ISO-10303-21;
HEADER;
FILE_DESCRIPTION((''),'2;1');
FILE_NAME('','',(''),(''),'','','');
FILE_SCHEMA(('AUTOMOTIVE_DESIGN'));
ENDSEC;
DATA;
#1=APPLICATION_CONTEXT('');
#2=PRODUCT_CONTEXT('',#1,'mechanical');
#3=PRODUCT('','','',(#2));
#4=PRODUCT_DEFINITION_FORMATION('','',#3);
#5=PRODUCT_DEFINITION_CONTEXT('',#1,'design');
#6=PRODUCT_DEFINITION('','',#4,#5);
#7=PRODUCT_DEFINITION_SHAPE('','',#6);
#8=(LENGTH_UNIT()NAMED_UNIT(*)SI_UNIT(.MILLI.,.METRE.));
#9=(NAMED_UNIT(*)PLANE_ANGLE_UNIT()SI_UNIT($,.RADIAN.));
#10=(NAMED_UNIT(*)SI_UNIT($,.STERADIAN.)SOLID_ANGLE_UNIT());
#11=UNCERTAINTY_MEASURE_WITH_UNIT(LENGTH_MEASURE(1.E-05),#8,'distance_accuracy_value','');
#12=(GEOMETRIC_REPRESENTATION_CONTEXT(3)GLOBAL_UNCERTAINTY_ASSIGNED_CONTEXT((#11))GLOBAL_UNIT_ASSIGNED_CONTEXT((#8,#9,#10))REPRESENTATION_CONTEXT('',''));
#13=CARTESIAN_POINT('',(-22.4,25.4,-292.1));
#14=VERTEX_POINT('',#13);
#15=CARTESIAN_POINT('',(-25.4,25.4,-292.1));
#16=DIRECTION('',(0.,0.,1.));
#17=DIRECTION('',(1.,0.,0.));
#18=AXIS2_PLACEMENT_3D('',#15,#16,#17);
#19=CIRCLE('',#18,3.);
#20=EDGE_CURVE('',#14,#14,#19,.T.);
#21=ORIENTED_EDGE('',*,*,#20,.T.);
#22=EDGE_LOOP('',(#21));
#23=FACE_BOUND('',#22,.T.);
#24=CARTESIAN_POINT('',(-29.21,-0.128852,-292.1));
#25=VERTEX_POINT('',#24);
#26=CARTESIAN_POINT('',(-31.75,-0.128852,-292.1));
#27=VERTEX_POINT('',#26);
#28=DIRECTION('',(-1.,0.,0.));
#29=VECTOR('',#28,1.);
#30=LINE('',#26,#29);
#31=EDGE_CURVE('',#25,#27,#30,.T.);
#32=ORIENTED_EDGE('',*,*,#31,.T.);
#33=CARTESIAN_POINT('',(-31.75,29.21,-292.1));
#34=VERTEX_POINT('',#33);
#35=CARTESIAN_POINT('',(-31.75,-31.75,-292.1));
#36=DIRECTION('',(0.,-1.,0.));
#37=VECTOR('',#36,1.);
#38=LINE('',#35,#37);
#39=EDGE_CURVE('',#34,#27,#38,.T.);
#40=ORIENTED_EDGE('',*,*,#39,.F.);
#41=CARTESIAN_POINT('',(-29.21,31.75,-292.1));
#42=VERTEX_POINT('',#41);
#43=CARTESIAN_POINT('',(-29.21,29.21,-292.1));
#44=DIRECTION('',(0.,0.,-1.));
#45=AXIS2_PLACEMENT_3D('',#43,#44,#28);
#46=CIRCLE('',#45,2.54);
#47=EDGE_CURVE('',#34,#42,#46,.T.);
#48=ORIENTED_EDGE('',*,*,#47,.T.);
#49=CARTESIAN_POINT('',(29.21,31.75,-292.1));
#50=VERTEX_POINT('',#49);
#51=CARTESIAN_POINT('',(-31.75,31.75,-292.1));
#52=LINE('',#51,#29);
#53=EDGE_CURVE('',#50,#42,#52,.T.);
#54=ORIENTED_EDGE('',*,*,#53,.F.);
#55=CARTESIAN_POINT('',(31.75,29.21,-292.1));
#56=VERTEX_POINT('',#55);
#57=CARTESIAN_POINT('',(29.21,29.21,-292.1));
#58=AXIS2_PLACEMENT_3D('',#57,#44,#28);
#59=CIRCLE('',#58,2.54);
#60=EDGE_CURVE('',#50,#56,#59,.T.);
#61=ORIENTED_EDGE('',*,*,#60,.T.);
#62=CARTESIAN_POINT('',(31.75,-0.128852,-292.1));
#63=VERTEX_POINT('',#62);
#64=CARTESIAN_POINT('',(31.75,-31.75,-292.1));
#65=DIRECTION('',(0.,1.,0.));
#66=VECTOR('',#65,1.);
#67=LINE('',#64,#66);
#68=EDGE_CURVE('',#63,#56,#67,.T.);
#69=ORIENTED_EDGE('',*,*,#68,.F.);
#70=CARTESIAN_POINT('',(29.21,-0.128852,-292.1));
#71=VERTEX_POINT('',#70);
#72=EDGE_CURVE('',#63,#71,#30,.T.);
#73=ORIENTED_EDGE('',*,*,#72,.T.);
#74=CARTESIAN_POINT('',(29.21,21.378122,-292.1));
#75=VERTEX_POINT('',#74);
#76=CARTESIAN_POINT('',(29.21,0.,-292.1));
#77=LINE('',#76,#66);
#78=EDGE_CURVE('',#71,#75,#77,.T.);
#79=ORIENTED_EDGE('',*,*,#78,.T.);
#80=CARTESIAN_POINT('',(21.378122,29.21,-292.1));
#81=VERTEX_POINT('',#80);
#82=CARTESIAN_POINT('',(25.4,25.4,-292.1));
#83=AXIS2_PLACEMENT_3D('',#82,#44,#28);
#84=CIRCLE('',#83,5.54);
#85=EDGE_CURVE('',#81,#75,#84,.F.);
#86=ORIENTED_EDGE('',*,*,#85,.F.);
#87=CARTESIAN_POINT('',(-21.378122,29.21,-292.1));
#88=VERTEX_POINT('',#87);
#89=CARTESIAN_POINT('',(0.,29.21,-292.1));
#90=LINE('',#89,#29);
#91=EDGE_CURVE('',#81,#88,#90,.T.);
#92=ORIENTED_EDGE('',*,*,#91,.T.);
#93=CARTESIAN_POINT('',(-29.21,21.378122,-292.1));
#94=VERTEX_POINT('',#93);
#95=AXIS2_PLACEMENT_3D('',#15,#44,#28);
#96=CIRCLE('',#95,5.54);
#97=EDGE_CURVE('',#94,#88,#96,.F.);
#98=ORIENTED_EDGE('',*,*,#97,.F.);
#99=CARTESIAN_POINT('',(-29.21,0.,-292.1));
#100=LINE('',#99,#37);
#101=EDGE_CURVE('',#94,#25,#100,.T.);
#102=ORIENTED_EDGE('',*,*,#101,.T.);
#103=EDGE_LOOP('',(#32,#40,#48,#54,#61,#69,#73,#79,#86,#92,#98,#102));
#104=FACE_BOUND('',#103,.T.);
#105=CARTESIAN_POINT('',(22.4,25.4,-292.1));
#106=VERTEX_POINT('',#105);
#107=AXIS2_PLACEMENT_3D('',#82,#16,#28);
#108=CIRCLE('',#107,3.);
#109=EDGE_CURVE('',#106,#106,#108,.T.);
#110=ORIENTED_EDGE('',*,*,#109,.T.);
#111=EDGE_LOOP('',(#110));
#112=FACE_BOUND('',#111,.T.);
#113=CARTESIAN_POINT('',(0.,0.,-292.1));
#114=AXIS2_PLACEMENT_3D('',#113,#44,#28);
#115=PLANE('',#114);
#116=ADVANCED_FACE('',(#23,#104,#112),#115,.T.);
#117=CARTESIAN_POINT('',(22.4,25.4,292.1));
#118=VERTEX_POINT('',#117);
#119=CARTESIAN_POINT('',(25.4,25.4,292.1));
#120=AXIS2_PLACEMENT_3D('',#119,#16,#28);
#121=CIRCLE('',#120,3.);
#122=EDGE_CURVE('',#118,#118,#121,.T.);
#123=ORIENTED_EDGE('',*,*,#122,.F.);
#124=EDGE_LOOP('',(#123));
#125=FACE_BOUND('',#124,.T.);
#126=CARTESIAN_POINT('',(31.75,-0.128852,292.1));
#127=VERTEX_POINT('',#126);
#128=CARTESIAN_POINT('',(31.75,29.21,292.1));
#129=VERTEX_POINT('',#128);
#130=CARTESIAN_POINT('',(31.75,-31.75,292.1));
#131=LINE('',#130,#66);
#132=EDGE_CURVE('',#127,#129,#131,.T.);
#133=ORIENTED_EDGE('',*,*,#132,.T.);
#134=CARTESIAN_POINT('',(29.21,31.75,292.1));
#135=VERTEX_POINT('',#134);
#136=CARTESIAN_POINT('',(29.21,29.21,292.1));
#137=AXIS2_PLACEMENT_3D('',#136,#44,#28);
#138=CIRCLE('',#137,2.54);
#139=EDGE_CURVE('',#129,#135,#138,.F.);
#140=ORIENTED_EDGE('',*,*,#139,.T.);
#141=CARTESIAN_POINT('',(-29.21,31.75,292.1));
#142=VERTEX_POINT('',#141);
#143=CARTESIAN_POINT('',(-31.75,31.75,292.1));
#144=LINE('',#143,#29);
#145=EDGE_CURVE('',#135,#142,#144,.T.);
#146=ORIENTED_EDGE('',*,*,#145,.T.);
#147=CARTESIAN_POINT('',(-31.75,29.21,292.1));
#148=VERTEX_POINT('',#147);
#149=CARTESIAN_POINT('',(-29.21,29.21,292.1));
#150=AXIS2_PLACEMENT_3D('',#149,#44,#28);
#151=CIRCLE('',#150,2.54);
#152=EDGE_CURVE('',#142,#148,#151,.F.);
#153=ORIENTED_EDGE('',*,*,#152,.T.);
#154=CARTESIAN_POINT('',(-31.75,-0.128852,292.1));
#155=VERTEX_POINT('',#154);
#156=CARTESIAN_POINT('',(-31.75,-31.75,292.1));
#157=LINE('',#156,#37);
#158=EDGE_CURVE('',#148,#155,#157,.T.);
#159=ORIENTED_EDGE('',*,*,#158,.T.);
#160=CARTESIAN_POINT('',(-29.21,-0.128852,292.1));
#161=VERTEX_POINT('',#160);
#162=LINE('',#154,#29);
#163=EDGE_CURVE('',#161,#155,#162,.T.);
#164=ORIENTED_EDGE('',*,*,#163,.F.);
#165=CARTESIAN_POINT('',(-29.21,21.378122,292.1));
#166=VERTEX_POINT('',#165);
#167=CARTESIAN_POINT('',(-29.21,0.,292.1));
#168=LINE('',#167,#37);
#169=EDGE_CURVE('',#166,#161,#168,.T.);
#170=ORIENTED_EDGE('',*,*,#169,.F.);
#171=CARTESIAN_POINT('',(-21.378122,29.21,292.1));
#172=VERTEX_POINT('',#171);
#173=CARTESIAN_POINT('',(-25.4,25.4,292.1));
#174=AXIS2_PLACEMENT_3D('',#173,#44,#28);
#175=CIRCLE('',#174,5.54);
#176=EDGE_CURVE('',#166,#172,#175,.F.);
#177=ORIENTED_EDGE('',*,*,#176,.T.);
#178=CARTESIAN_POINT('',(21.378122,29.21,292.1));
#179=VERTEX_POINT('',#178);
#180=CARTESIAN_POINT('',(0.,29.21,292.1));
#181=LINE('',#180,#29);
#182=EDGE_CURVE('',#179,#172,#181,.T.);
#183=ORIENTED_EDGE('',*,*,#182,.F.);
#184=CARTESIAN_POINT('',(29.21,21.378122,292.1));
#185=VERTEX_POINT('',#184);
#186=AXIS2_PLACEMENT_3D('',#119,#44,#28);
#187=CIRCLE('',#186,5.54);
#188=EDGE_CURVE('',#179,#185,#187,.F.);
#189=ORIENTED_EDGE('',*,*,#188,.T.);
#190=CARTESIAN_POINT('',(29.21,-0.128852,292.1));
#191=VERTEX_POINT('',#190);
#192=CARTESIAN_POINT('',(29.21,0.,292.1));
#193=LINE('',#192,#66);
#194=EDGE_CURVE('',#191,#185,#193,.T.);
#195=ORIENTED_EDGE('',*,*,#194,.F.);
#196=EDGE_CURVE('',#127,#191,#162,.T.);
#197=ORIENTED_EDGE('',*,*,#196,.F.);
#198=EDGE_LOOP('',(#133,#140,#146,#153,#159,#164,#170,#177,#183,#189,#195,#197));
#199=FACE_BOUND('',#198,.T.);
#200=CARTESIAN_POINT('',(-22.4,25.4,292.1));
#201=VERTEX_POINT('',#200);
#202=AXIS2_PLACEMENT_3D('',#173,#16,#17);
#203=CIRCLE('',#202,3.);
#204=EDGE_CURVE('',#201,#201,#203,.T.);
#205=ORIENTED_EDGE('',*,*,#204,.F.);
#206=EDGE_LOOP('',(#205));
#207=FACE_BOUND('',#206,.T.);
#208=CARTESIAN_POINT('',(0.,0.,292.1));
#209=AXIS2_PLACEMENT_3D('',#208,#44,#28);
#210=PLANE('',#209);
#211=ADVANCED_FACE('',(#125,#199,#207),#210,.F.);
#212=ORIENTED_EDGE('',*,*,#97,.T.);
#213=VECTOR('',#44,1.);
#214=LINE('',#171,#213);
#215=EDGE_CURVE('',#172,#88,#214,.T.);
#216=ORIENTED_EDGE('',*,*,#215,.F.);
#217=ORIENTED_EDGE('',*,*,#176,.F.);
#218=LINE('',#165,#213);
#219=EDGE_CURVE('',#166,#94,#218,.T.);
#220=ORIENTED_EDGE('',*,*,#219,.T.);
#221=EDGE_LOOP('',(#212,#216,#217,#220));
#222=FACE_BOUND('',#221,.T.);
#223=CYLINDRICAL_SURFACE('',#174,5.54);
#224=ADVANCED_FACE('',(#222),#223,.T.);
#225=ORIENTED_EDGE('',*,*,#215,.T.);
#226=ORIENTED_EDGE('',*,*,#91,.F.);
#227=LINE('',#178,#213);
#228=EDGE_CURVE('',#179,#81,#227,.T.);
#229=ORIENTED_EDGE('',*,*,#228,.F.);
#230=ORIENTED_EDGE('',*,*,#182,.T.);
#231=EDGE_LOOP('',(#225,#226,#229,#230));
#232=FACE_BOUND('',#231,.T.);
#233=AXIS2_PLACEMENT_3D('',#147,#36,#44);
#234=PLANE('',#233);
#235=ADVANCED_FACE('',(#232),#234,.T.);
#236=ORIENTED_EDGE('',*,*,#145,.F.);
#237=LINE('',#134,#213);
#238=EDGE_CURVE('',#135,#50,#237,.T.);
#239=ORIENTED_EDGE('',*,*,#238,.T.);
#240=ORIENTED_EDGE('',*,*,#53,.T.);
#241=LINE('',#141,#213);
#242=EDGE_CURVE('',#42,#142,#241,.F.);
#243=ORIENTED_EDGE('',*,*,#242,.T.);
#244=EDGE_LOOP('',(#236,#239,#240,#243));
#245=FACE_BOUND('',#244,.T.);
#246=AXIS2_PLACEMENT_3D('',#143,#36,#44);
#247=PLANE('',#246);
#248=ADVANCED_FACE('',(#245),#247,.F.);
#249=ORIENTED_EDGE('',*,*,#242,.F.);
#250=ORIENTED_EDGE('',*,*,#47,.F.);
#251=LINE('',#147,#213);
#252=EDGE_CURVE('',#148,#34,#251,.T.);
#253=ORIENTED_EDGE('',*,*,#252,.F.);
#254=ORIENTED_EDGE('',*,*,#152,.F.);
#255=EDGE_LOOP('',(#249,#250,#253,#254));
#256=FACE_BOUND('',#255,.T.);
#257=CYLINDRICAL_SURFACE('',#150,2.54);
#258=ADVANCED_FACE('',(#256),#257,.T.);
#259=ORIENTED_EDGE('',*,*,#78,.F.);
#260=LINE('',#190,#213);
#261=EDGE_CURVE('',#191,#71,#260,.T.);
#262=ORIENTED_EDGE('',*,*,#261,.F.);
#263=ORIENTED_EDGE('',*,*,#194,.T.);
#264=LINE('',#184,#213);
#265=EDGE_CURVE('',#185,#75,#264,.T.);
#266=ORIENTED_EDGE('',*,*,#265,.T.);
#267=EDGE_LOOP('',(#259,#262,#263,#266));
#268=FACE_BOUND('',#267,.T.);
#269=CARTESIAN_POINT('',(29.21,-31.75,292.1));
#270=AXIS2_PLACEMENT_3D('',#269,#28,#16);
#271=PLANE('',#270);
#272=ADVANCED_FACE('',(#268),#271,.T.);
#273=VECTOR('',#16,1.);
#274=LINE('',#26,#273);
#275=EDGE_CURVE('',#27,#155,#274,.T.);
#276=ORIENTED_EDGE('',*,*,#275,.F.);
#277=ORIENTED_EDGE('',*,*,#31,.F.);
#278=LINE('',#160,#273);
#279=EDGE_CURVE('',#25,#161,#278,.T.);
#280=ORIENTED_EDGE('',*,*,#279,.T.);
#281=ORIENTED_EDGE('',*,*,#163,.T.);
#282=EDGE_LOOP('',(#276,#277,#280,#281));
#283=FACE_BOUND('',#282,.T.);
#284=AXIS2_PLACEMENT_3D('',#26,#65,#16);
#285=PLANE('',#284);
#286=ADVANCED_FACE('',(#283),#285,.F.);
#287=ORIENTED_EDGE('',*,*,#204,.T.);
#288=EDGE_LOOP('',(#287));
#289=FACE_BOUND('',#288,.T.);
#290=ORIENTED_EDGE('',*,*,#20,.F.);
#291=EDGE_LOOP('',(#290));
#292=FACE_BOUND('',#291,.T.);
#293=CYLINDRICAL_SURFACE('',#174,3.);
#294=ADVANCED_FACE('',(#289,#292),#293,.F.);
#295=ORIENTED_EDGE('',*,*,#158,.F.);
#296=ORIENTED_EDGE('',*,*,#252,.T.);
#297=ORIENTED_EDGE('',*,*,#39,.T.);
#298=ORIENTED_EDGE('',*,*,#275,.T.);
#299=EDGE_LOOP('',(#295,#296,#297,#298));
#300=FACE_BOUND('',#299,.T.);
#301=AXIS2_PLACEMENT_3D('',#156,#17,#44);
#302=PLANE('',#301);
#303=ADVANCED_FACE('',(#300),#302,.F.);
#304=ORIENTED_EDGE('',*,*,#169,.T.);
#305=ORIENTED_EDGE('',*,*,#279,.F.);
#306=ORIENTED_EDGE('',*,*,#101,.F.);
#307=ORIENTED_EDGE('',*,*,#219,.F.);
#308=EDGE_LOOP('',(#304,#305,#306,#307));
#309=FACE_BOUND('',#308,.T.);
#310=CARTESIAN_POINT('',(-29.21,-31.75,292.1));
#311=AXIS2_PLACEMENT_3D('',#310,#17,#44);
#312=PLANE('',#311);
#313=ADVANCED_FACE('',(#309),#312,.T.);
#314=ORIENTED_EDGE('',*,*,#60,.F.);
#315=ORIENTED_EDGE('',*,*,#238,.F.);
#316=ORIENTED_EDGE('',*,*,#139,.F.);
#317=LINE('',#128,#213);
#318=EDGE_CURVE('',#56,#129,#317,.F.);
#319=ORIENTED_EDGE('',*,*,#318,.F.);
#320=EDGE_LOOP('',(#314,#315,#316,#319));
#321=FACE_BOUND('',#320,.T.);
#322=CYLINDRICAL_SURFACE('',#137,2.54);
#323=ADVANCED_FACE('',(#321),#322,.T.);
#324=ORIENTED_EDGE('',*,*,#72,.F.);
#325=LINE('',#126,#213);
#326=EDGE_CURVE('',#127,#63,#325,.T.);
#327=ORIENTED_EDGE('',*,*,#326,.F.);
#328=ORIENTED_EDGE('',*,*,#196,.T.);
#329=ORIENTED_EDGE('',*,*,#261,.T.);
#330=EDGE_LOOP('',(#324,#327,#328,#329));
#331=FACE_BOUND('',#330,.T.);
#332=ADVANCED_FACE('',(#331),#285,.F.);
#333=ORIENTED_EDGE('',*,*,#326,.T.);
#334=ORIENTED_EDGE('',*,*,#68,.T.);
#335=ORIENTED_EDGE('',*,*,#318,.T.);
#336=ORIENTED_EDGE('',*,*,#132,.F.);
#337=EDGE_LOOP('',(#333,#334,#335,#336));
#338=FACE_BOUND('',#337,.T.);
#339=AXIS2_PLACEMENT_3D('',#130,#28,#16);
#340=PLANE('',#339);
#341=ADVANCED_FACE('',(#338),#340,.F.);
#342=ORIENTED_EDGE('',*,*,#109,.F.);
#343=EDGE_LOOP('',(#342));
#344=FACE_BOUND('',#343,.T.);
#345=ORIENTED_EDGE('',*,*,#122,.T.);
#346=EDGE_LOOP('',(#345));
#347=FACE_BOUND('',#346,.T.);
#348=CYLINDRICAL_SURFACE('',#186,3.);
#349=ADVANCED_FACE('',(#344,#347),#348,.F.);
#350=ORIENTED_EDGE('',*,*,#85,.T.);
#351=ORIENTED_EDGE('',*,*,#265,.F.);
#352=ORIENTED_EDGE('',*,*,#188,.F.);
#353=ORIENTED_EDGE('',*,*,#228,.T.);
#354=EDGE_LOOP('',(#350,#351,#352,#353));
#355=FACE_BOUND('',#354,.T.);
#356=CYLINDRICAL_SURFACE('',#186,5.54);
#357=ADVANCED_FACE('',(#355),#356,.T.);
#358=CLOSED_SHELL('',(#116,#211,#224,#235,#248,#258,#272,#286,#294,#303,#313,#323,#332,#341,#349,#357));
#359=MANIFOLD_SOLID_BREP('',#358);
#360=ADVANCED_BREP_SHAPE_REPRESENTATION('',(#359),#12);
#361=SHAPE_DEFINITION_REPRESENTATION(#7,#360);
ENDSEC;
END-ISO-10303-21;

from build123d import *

# Parameters (mm, degrees)
SKETCH1_W           = 63.5
SKETCH1_H           = 63.5
SKETCH1_R           = 3
BOSS_EXTRUDE1_DEPTH = 292.1
FILLET1_R           = 2.54
SHELL1_START        = -292.1
SHELL1_DEPTH        = 584.2
SKETCH3_W           = 63.665273771
SKETCH3_H           = 31.75
CUT_EXTRUDE2_DEPTH  = 586.923002621


# Read off the part's stored shape, not the designer's step: Shell1
with BuildPart() as part:
    # Sketch1 → Boss-Extrude1 (new, symmetric)
    with BuildSketch(Plane.XY):
        Rectangle(SKETCH1_W, SKETCH1_H)
        with Locations((-25.4, 25.4)):
            Circle(SKETCH1_R, mode=Mode.SUBTRACT)
        with Locations(Location((25.4, -25.4, 0), (0, 0, 180))):
            Circle(SKETCH1_R, mode=Mode.SUBTRACT)
        with Locations(Location((-25.4, -25.4, 0), (0, 0, 180))):
            Circle(SKETCH1_R, mode=Mode.SUBTRACT)
        with Locations(Location((25.4, 25.4, 0), (0, 0, 180))):
            Circle(SKETCH1_R, mode=Mode.SUBTRACT)
    extrude(amount=BOSS_EXTRUDE1_DEPTH, both=True)

    # Fillet1
    fillet1_edges = [part.edges().sort_by_distance(p)[0] for p in [
        (31.75, -31.75, 0),
        (-31.75, -31.75, 0),
        (-31.75, 31.75, 0),
        (31.75, 31.75, 0),
    ]]
    fillet(fillet1_edges, radius=FILLET1_R)

    # Shell1 outline → Shell1 (cut)
    with BuildSketch(Plane.XY.offset(SHELL1_START)):
        with BuildLine():
            Line((29.21, -21.378122329), (29.21, 21.378122329))
            ThreePointArc((29.21, 21.378122329), (21.482628432, 21.482628432), (21.378122329, 29.21))
            Line((21.378122329, 29.21), (-21.378122329, 29.21))
            ThreePointArc((-21.378122329, 29.21), (-21.482628432, 21.482628432), (-29.21, 21.378122329))
            Line((-29.21, 21.378122329), (-29.21, -21.378122329))
            ThreePointArc((-29.21, -21.378122329), (-21.482628432, -21.482628432), (-21.378122329, -29.21))
            Line((-21.378122329, -29.21), (21.378122329, -29.21))
            ThreePointArc((21.378122329, -29.21), (21.482628432, -21.482628432), (29.21, -21.378122329))
        make_face()
    extrude(amount=SHELL1_DEPTH, mode=Mode.SUBTRACT)

    # Sketch3 → Cut-Extrude2 (cut, through all)
    with BuildSketch(Plane.XY.offset(292.1)):
        with Locations((0.082636885, -16.003852467)):
            Rectangle(SKETCH3_W, SKETCH3_H)
    extrude(amount=-CUT_EXTRUDE2_DEPTH, mode=Mode.SUBTRACT)


solid = part.part
